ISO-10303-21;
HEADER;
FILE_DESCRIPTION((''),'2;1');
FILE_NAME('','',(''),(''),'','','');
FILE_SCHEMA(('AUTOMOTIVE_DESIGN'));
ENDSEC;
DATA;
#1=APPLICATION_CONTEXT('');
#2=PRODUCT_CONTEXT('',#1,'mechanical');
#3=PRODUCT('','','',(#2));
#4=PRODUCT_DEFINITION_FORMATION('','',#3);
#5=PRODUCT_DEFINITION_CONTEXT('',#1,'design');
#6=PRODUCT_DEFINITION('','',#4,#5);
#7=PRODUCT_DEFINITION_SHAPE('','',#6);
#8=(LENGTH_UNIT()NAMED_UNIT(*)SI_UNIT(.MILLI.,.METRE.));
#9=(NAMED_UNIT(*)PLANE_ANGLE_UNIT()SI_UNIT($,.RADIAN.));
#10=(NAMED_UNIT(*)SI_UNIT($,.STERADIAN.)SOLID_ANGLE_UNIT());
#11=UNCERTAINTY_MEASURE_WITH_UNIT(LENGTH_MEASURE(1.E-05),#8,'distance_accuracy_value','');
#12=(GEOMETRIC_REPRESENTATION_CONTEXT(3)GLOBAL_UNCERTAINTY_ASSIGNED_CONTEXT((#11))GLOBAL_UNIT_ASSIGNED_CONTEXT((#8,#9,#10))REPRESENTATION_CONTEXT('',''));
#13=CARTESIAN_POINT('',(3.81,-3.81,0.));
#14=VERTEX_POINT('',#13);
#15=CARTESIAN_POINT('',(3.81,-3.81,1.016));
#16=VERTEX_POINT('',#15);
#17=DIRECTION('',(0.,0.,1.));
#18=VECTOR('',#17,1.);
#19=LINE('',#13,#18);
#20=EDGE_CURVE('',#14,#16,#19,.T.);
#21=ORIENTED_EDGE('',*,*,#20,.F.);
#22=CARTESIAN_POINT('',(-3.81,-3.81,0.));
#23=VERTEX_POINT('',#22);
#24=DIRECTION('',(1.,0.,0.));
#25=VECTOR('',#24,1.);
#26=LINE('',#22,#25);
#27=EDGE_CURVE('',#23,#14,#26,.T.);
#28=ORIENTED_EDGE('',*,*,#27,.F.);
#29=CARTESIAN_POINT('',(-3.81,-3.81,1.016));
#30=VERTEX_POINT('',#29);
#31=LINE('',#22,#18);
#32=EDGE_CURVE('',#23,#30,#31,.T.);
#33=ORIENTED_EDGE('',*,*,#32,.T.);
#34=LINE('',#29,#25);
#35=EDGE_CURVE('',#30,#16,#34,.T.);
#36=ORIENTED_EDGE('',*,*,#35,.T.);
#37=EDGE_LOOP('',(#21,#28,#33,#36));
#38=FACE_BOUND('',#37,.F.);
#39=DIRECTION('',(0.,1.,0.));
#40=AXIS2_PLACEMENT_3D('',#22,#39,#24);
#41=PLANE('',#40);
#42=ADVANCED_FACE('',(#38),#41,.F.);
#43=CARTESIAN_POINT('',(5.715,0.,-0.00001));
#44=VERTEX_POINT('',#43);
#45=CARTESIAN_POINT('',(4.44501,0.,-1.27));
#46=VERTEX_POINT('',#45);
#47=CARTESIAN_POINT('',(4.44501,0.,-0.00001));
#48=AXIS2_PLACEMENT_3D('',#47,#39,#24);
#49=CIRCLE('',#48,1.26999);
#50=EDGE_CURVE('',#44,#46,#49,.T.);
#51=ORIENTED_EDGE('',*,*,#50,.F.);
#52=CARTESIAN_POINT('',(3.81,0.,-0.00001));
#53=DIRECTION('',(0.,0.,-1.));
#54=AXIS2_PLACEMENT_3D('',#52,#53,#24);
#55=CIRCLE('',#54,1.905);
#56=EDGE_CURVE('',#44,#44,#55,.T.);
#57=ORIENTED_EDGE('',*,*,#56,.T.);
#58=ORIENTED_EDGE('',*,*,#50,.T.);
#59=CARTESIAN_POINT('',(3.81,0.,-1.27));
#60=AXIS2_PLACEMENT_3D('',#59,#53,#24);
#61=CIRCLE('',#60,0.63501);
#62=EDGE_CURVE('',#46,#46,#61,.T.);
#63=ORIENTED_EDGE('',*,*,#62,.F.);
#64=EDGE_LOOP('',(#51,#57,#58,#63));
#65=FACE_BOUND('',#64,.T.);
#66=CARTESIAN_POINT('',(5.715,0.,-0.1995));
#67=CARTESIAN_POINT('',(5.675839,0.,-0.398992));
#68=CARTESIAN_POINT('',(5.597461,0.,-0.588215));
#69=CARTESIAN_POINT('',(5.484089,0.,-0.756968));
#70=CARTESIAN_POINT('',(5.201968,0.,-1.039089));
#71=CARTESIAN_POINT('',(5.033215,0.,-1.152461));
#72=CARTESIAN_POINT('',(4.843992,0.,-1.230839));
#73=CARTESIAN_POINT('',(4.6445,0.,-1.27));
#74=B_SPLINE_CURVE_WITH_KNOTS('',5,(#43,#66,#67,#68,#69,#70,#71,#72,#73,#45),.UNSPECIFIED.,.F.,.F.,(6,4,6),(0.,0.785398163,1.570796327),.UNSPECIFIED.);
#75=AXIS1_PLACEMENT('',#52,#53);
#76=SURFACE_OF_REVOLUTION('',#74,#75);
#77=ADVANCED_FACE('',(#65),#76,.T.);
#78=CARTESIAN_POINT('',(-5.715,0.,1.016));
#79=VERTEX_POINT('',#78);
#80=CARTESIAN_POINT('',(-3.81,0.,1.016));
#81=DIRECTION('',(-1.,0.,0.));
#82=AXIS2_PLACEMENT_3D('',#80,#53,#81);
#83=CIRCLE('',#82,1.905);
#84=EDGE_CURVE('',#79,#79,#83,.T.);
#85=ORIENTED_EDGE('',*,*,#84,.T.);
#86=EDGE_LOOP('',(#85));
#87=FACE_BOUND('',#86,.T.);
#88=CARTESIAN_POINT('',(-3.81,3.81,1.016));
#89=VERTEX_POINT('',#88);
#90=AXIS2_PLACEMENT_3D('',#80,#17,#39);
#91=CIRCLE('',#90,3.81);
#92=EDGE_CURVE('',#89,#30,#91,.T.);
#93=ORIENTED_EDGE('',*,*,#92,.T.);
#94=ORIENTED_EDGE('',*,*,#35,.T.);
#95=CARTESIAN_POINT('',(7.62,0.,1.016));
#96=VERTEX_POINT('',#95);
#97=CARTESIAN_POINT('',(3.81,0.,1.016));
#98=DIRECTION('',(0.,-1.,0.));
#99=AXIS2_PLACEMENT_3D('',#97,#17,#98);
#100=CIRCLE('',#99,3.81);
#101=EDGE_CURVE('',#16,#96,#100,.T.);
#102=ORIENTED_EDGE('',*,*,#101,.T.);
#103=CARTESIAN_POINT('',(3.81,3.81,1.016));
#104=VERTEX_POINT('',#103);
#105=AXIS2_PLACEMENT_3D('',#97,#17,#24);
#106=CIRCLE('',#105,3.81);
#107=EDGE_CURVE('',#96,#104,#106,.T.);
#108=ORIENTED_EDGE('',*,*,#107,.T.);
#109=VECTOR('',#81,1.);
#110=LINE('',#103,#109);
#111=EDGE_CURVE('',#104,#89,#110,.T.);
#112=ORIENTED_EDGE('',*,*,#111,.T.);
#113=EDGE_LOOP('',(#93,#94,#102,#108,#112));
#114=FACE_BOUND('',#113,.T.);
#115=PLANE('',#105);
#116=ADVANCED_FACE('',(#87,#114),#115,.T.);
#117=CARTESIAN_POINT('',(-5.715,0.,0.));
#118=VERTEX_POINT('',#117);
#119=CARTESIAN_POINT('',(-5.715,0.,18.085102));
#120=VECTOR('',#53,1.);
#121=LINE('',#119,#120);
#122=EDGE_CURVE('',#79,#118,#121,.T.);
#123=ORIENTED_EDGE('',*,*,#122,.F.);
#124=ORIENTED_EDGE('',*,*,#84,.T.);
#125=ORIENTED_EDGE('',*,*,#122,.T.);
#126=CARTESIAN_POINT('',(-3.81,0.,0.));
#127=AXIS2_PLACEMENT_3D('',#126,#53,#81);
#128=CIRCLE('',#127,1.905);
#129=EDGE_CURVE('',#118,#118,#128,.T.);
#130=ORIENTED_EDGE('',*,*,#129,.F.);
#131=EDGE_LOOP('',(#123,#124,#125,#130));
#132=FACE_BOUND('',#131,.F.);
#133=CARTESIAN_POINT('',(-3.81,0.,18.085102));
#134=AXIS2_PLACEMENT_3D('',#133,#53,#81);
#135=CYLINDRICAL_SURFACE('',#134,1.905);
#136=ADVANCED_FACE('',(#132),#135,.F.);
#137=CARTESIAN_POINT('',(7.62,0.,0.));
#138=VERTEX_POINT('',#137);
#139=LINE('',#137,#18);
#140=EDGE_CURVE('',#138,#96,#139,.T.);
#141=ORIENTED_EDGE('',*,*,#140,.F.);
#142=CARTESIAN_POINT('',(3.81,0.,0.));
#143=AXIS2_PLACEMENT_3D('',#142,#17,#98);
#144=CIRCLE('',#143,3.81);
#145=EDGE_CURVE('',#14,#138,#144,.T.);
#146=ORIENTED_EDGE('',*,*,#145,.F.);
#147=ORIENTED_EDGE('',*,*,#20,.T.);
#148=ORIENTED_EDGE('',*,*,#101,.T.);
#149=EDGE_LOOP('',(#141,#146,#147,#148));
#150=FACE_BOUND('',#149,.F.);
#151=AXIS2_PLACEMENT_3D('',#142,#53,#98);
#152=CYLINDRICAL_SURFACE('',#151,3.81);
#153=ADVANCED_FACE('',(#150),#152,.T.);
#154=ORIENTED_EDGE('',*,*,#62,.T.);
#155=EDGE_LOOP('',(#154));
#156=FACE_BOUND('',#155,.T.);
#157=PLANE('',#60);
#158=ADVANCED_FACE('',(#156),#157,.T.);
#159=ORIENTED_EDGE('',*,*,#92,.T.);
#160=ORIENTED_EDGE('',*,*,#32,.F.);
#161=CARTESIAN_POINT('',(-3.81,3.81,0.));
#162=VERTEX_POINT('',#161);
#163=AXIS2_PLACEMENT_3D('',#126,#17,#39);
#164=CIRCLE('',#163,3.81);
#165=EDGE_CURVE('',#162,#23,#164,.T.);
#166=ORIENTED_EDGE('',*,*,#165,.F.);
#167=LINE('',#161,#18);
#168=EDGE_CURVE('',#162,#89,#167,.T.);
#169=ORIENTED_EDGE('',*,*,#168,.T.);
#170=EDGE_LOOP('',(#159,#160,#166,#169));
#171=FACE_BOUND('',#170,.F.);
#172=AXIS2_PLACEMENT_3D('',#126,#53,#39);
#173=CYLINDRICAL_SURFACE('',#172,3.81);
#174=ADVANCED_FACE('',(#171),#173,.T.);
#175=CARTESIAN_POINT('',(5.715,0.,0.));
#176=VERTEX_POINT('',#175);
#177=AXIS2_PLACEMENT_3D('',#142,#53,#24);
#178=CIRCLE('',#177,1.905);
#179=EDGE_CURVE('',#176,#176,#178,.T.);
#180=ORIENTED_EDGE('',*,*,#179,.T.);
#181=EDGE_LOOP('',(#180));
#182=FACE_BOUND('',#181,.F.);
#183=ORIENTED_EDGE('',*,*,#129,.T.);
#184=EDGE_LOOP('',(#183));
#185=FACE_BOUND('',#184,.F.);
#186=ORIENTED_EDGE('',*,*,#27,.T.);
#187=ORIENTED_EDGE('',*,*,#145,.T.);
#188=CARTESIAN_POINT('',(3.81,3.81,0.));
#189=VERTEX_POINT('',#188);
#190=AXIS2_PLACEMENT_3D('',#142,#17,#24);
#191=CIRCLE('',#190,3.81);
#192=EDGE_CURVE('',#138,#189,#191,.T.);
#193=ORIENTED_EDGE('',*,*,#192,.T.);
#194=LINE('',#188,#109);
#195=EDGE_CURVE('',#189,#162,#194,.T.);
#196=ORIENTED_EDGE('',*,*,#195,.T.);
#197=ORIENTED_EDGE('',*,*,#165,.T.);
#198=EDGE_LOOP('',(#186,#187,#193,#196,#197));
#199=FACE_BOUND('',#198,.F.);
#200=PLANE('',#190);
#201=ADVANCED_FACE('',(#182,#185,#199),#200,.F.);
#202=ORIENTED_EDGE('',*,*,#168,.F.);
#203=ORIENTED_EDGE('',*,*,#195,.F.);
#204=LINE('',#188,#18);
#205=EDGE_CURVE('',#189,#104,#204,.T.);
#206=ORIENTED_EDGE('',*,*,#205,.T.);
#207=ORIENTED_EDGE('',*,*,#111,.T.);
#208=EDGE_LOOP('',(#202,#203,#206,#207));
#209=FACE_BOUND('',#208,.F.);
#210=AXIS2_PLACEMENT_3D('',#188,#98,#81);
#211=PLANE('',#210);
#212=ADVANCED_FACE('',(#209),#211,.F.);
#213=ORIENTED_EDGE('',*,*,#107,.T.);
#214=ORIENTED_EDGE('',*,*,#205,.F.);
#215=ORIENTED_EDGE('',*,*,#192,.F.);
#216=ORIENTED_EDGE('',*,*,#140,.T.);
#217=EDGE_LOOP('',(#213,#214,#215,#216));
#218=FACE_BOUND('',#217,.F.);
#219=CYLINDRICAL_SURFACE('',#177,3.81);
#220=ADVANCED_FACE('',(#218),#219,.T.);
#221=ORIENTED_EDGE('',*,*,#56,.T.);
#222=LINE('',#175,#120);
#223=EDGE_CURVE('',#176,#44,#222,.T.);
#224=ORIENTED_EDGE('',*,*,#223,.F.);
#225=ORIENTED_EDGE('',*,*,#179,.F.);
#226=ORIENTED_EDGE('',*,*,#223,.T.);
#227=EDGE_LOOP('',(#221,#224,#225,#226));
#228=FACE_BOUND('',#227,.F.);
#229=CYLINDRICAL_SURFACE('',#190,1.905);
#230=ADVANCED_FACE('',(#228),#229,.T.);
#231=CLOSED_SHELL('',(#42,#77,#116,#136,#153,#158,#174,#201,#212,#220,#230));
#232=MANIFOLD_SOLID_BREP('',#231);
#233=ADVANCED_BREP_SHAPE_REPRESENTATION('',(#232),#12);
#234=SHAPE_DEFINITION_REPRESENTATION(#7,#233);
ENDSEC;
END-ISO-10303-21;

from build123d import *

# Parameters (mm, degrees)
F1_DEPTH = 1.016
F3_D     = 3.81
F4_R     = 1.905
F5_DEPTH = 1.27
F6_R     = 1.26999


# Not quite as in the source:
# - a fillet or chamfer is up to 0.001 mm smaller than in the source, because OpenCascade refuses the exact size


with BuildPart() as f1:
    # F0 (on Top) → F1 (new body)
    with BuildSketch(Plane.XY):
        with BuildLine():
            ThreePointArc((3.81, -3.81), (6.5040768363, -2.6940768363), (7.62, 0))
            ThreePointArc((7.62, 0), (6.5040768363, 2.6940768363), (3.81, 3.81))
            ThreePointArc((3.81, 3.81), (1.1159231637, 2.6940768363), (0, 0))
            ThreePointArc((0, 0), (1.1159231637, -2.6940768363), (3.81, -3.81))
        make_face()
        with BuildLine():
            ThreePointArc((0, 0), (1.1159231637, 2.6940768363), (3.81, 3.81))
            Line((3.81, 3.81), (-3.81, 3.81))
            ThreePointArc((-3.81, 3.81), (-1.1159231637, 2.6940768363), (0, 0))
        make_face()
        with BuildLine():
            Line((-3.81, -3.81), (3.81, -3.81))
            ThreePointArc((3.81, -3.81), (1.1159231637, -2.6940768363), (0, 0))
            ThreePointArc((0, 0), (-1.1159231637, -2.6940768363), (-3.81, -3.81))
        make_face()
        with BuildLine():
            ThreePointArc((-3.81, -3.81), (-1.1159231637, -2.6940768363), (0, 0))
            ThreePointArc((0, 0), (-1.1159231637, 2.6940768363), (-3.81, 3.81))
            ThreePointArc((-3.81, 3.81), (-7.62, 0), (-3.81, -3.81))
        make_face()
    extrude(amount=F1_DEPTH)

    # F3 (through all)
    with Locations(Plane.XY.offset(1.016)):
        with Locations((-3.81, 0)):
            Hole(F3_D / 2)

    # F4 (on face) → F5 (join)
    with BuildSketch(Plane(origin=(0, 0, 0), x_dir=(1, 0, 0), z_dir=(0, 0, -1))):
        with Locations((3.81, 0)):
            Circle(F4_R)
    extrude(amount=F5_DEPTH)

    # F6 (radius 1.27 in the source; OpenCascade refuses exactly that, so slightly less here)
    f6_edges = [f1.edges().sort_by_distance(p)[0] for p in [
        (1.905, 0, -1.27),
    ]]
    fillet(f6_edges, radius=F6_R)


solid = f1.part
